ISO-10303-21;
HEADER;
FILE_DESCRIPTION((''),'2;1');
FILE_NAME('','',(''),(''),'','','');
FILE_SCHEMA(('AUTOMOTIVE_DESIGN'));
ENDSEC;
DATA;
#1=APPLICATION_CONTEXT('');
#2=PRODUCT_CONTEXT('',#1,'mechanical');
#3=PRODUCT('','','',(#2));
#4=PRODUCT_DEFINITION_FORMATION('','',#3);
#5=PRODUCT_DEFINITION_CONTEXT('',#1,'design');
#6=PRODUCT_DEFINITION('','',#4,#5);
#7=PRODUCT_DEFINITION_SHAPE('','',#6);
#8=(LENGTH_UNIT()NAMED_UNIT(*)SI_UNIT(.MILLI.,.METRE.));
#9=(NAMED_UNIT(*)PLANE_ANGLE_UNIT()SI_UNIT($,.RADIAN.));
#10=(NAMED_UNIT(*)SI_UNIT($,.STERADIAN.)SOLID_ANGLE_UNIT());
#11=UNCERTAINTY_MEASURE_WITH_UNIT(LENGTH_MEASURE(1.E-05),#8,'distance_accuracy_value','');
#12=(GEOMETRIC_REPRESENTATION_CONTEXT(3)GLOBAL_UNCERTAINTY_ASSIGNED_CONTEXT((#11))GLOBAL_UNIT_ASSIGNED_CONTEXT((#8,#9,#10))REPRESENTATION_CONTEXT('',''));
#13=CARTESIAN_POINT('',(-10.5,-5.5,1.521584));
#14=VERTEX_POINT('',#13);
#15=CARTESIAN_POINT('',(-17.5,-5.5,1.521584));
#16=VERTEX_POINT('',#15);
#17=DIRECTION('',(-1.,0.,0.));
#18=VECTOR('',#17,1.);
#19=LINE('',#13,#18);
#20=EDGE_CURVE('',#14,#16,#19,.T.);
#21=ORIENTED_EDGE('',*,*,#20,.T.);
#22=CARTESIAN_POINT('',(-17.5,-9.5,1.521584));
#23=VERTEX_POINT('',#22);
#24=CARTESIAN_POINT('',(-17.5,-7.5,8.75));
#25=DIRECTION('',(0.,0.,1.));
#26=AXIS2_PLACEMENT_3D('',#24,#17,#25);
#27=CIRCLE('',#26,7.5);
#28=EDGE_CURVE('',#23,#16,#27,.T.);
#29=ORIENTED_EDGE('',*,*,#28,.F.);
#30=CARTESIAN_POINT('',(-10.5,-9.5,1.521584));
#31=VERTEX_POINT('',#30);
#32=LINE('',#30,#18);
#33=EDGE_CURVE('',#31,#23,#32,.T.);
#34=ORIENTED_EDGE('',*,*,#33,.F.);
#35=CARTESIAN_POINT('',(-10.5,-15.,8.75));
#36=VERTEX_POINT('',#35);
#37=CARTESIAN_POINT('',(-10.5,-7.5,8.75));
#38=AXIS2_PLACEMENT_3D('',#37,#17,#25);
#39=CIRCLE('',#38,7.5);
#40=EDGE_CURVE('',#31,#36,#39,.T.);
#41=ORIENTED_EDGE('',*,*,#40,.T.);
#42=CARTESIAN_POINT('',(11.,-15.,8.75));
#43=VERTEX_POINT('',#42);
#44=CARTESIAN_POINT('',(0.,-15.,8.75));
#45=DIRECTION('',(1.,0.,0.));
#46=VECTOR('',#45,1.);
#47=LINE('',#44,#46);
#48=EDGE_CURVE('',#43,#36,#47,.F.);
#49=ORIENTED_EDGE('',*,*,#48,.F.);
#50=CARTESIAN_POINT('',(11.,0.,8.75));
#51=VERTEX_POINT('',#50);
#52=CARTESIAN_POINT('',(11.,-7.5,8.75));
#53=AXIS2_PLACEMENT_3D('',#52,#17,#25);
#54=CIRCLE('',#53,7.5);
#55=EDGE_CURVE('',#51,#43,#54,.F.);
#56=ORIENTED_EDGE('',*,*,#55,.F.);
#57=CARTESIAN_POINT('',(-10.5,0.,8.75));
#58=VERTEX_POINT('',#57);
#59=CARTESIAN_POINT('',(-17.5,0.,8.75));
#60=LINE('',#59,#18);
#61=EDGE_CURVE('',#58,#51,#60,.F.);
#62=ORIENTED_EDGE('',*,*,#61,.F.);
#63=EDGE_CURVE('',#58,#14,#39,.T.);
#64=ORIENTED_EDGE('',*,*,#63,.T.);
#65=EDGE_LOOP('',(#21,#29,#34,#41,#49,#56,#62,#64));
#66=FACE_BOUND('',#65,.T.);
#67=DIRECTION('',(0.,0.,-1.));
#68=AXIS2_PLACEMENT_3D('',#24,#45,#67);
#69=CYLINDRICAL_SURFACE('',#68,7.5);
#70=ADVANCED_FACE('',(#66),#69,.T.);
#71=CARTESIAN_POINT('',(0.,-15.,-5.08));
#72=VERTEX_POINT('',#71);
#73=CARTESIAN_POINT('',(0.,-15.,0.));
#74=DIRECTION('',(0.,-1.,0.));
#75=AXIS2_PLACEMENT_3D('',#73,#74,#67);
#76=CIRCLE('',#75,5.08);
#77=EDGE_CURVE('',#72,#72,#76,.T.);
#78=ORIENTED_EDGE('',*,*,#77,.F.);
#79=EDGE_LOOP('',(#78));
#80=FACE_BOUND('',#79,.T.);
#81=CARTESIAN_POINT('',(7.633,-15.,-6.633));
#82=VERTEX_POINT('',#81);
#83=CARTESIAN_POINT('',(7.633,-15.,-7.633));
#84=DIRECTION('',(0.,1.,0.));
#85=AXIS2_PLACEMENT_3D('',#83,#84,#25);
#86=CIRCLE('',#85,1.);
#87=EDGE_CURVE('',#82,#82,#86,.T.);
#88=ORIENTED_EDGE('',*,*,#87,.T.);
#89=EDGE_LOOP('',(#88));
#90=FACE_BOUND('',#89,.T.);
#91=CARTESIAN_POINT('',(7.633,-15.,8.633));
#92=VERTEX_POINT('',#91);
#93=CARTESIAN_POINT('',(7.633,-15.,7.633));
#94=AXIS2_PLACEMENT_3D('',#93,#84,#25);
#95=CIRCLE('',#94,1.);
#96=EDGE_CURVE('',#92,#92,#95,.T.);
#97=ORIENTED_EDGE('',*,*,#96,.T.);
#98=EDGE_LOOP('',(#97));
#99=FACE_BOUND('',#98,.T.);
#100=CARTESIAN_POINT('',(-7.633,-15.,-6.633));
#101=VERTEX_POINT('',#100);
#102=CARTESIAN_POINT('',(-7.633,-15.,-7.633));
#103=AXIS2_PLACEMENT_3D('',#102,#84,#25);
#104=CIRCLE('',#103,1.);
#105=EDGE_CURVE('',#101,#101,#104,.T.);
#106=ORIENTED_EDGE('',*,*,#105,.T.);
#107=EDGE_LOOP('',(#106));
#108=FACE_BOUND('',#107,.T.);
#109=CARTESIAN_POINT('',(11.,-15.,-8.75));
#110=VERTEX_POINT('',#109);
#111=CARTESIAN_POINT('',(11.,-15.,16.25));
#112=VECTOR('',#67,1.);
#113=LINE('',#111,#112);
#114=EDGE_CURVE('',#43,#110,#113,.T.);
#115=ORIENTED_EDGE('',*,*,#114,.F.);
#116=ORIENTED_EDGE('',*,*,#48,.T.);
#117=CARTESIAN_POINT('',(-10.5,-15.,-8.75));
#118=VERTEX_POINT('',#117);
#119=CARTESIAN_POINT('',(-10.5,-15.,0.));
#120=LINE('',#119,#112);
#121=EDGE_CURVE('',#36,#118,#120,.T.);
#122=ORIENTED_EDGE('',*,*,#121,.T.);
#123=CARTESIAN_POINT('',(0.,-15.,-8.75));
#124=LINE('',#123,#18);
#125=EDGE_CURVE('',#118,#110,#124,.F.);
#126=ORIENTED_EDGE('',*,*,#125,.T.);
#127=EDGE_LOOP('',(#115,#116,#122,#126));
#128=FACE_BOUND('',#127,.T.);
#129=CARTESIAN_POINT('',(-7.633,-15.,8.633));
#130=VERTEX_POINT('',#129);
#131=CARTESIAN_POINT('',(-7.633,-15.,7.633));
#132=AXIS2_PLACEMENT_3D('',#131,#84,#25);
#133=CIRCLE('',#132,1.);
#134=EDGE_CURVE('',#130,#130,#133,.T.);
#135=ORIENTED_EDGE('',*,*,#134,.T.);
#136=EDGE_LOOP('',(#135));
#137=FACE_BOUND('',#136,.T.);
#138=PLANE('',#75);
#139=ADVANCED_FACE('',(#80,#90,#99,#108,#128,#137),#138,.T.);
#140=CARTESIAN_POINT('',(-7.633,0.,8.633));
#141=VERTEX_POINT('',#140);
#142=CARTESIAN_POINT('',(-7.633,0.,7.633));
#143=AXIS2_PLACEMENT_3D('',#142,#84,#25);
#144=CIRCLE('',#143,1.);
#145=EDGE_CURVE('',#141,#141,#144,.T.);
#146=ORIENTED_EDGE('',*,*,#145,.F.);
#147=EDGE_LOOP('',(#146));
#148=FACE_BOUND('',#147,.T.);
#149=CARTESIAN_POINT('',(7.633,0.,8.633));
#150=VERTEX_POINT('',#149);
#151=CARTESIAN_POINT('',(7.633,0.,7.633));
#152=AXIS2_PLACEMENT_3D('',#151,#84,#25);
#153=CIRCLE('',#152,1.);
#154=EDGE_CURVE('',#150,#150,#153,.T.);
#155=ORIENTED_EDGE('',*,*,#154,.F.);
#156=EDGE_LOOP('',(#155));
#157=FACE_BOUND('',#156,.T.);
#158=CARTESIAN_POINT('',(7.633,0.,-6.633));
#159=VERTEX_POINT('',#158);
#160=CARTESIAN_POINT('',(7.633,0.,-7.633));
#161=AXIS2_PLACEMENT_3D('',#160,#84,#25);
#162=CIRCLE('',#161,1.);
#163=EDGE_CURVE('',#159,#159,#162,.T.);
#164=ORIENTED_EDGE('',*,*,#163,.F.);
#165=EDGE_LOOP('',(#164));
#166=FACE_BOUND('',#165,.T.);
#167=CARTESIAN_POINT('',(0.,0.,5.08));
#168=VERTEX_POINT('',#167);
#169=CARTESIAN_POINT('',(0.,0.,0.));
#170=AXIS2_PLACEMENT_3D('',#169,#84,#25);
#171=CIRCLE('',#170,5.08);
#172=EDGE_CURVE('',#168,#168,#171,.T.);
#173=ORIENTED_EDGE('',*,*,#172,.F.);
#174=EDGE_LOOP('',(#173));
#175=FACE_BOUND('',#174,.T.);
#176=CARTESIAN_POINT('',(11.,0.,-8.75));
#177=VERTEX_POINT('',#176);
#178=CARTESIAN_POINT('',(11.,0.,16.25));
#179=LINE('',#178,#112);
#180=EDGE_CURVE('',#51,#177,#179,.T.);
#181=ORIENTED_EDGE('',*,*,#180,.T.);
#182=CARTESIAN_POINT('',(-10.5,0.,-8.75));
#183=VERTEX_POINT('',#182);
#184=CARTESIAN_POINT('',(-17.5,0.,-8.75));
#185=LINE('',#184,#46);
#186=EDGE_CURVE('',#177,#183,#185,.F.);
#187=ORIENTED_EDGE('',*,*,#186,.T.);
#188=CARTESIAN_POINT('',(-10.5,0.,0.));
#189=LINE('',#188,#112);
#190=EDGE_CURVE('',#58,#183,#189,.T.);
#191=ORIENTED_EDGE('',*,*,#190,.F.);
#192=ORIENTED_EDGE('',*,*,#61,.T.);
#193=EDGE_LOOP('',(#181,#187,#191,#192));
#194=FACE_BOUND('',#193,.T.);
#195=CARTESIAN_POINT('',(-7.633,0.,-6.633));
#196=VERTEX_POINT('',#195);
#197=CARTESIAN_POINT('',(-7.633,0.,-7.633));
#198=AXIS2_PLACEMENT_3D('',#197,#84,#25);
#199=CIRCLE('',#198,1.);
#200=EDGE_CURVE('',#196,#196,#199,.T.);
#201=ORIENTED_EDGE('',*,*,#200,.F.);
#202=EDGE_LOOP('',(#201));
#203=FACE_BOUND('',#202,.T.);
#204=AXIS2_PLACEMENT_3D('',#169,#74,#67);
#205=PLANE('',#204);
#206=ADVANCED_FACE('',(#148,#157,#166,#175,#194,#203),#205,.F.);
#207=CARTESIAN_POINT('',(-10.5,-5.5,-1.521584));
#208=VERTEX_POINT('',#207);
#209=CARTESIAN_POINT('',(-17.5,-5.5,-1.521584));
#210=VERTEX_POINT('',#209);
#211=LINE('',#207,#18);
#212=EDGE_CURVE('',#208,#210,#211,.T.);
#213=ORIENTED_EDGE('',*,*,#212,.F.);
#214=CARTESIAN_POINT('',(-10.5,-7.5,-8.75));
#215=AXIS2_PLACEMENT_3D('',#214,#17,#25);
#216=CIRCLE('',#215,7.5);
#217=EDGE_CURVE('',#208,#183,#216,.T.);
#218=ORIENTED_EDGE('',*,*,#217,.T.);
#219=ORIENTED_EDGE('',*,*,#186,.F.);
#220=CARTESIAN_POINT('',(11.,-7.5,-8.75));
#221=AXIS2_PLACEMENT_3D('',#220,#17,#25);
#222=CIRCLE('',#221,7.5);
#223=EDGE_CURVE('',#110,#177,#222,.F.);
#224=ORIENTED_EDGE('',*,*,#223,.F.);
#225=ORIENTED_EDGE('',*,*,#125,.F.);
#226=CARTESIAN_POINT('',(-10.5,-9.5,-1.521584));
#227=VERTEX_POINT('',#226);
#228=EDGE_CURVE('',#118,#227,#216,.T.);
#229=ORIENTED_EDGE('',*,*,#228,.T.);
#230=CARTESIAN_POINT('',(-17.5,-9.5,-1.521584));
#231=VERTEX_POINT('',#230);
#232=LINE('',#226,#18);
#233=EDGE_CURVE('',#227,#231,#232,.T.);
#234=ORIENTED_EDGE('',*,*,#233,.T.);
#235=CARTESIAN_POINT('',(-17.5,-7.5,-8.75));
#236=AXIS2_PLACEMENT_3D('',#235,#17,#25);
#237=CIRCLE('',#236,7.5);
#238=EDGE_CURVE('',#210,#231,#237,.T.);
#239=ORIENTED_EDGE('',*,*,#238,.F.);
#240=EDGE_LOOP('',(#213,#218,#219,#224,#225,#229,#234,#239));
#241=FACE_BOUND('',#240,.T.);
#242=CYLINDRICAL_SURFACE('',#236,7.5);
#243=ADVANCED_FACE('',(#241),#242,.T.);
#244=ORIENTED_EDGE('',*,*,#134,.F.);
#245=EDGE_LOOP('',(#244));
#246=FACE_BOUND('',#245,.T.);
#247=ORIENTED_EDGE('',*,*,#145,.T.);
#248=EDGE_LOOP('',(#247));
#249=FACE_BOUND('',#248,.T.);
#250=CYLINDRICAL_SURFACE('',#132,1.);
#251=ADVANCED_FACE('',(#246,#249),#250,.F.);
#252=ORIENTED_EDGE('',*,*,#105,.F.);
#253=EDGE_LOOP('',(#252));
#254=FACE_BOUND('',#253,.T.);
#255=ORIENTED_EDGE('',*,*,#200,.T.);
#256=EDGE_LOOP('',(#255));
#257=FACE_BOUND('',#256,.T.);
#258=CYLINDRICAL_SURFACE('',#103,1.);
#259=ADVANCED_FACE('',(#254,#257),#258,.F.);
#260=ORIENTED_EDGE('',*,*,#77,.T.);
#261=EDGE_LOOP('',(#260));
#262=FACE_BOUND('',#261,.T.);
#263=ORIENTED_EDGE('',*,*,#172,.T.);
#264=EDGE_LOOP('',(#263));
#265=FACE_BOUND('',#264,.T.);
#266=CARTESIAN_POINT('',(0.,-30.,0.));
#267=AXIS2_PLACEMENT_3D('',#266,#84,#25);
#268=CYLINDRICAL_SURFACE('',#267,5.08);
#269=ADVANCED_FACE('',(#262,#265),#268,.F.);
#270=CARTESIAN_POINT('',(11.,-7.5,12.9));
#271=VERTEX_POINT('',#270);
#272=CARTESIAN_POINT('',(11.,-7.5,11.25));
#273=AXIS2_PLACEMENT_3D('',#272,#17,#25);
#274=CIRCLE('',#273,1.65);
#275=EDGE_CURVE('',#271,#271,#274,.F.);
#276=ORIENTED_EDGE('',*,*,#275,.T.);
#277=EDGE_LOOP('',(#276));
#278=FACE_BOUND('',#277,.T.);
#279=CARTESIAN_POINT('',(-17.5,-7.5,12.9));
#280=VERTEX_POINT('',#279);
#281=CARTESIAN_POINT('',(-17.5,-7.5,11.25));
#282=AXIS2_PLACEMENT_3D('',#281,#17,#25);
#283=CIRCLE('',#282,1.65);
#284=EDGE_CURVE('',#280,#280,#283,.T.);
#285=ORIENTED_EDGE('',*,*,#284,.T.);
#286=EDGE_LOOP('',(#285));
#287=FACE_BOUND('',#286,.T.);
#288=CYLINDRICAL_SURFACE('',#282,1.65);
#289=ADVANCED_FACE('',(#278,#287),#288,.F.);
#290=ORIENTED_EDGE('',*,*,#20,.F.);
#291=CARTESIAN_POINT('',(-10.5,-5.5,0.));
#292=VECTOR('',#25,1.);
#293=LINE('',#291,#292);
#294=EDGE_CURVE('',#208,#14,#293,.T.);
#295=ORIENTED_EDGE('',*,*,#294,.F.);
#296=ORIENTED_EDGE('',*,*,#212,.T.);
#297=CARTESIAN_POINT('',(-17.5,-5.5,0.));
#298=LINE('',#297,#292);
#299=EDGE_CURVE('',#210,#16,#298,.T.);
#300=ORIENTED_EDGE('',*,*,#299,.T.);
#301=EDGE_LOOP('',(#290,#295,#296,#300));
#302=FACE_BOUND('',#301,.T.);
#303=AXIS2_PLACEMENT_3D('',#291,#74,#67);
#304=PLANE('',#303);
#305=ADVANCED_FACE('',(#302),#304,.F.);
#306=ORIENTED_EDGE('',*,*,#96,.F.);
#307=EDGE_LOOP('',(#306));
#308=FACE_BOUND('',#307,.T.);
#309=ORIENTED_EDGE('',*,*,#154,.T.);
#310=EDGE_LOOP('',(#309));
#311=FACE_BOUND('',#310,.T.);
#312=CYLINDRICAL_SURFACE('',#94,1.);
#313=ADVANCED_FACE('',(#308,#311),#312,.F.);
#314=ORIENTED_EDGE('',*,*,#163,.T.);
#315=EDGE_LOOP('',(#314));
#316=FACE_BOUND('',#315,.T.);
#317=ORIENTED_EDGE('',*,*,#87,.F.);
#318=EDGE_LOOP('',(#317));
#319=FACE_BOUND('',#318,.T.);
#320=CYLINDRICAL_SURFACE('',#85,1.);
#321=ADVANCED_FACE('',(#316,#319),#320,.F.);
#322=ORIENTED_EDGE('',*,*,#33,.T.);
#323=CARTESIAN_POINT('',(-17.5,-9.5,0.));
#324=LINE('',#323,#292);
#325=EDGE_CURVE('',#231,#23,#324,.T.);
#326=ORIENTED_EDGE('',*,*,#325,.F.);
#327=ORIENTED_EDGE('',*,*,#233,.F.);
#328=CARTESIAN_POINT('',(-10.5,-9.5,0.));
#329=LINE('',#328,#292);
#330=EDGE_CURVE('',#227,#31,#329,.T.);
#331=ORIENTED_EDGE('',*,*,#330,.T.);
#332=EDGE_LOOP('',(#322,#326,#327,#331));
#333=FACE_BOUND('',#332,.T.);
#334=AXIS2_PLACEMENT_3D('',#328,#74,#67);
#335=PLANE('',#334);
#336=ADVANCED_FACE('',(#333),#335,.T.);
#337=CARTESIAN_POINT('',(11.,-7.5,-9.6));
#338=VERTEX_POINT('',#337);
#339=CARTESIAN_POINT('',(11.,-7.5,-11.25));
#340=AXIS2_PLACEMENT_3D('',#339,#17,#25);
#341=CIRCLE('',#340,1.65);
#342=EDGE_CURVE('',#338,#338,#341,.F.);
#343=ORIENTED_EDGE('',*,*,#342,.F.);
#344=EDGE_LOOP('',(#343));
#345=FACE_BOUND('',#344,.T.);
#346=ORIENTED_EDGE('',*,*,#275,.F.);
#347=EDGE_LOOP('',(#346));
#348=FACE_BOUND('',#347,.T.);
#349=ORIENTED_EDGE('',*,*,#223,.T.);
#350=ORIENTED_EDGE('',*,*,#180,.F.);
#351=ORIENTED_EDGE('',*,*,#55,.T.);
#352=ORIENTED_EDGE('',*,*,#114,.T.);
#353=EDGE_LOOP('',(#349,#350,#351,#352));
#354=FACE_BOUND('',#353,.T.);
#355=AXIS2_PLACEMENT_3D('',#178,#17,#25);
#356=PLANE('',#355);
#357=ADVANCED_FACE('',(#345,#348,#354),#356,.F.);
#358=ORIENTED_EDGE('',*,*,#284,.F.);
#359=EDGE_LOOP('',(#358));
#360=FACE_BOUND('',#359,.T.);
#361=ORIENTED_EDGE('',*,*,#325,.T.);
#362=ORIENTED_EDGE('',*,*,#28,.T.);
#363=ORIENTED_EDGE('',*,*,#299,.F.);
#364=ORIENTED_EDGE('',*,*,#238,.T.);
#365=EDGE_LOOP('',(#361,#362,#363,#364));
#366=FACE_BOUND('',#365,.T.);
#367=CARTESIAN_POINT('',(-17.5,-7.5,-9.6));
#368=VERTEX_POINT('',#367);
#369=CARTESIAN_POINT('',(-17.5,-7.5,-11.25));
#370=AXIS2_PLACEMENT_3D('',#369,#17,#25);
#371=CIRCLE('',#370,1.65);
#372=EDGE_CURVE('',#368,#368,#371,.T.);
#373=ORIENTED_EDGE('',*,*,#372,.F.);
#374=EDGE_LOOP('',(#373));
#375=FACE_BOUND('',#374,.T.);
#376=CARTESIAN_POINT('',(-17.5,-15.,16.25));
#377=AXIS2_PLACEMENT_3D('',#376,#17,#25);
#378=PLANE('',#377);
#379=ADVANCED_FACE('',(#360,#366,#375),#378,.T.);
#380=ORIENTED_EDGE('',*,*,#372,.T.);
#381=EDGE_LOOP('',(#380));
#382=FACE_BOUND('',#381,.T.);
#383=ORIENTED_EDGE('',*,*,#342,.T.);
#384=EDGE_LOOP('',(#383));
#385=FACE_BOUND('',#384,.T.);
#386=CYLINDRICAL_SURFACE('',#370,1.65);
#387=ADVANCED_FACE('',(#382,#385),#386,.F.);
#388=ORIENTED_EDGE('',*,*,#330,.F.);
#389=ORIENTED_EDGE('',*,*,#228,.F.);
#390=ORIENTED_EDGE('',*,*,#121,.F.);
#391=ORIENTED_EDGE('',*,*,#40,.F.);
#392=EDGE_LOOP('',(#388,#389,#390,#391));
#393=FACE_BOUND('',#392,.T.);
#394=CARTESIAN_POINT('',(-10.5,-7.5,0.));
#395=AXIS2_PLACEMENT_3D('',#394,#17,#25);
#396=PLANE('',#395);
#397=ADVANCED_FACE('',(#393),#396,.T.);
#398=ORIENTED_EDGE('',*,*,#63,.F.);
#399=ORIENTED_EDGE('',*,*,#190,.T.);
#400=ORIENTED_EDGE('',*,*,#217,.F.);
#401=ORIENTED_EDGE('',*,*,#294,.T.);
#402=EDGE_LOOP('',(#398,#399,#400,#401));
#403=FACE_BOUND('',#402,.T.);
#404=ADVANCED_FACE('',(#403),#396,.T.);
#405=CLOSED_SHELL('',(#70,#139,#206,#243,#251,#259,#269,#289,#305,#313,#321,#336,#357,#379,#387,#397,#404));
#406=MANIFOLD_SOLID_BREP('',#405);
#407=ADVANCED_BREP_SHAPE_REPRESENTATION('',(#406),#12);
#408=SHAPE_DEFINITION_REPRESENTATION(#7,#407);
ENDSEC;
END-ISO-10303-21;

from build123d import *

# Parameters (mm, degrees)
SKETCH1_W             = 35
SKETCH1_H             = 32.5
BOSS_EXTRUDE1_DEPTH   = 15
SKETCH2_R             = 5.08
CUT_EXTRUDE2_DEPTH    = 30
SKETCH4_R             = 1
CUT_EXTRUDE3_DEPTH    = 15
M4X0_7_TAPPED_HOLE1_D = 3.3
FILLET1_RADIUS        = 7.5
FILLET1_LENGTH        = 35
FILLET2_RADIUS        = 7.5
FILLET2_LENGTH        = 35
SKETCH19_W            = 6.5
SKETCH19_H            = 32.5
CUT_EXTRUDE13_DEPTH   = 29.201285432
CUT_EXTRUDE14_START   = -7
CUT_EXTRUDE14_DEPTH   = 7


# Read off the part's stored shape, not the designer's step: Cut-Extrude14
with BuildPart() as part:
    # Sketch1 → Boss-Extrude1 (new body)
    with BuildSketch(Plane(origin=(0, 0, 0), x_dir=(1, 0, 0), z_dir=(0, 1, 0))):
        Rectangle(SKETCH1_W, SKETCH1_H)
    extrude(amount=-BOSS_EXTRUDE1_DEPTH)

    # Sketch2 → Cut-Extrude2 (cut)
    with BuildSketch(Plane(origin=(0, 0, 0), x_dir=(1, 0, 0), z_dir=(0, 1, 0))):
        with Locations(Location((0, 0, 0), (0, 0, 270))):
            Circle(SKETCH2_R)
    extrude(amount=-CUT_EXTRUDE2_DEPTH, mode=Mode.SUBTRACT)

    # Sketch4 → Cut-Extrude3 (cut)
    with BuildSketch(Plane(origin=(0, 0, 0), x_dir=(1, 0, 0), z_dir=(0, 1, 0))):
        with Locations(Location((7.633, 7.633, 0), (0, 0, 270))):
            Circle(SKETCH4_R)
        with Locations(Location((-7.633, 7.633, 0), (0, 0, 270))):
            Circle(SKETCH4_R)
        with Locations(Location((-7.633, -7.633, 0), (0, 0, 270))):
            Circle(SKETCH4_R)
        with Locations(Location((7.633, -7.633, 0), (0, 0, 270))):
            Circle(SKETCH4_R)
    extrude(amount=-CUT_EXTRUDE3_DEPTH, mode=Mode.SUBTRACT)

    # M4x0.7 Tapped Hole1 (through all)
    with Locations(Plane(origin=(-17.5, 0, 0), x_dir=(0, -1, 0), z_dir=(-1, 0, 0))):
        with Locations((7.5, -11.25), (7.5, 11.25)):
            Hole(M4X0_7_TAPPED_HOLE1_D / 2)

    # Fillet1: full round fillet: the end face becomes a half cylinder, R = half its width
    fillet1_face = Plane((0, -7.5, -16.25), x_dir=(1, 0, 0), z_dir=(0, 0, -1))  # on the end face: x along it, z out of the body
    fillet1_slab = fillet1_face.offset(-FILLET1_RADIUS / 2) * Box(FILLET1_LENGTH, 2 * FILLET1_RADIUS, FILLET1_RADIUS, mode=Mode.PRIVATE)  # the body's end, R deep
    fillet1_round = Plane((0, -7.5, -8.75), x_dir=(0, 0, -1), z_dir=(1, 0, 0)) * Cylinder(FILLET1_RADIUS, FILLET1_LENGTH, mode=Mode.PRIVATE)  # its axis R under the face
    add(fillet1_slab - fillet1_round, mode=Mode.SUBTRACT)

    # Fillet2: full round fillet: the end face becomes a half cylinder, R = half its width
    fillet2_face = Plane((0, -7.5, 16.25), x_dir=(1, 0, 0), z_dir=(0, 0, 1))  # on the end face: x along it, z out of the body
    fillet2_slab = fillet2_face.offset(-FILLET2_RADIUS / 2) * Box(FILLET2_LENGTH, 2 * FILLET2_RADIUS, FILLET2_RADIUS, mode=Mode.PRIVATE)  # the body's end, R deep
    fillet2_round = Plane((0, -7.5, 8.75), x_dir=(0, 0, 1), z_dir=(1, 0, 0)) * Cylinder(FILLET2_RADIUS, FILLET2_LENGTH, mode=Mode.PRIVATE)  # its axis R under the face
    add(fillet2_slab - fillet2_round, mode=Mode.SUBTRACT)

    # Sketch19 → Cut-Extrude13 (cut, through all)
    with BuildSketch(Plane.XZ.offset(15)):
        with Locations((14.25, 0)):
            Rectangle(SKETCH19_W, SKETCH19_H)
    extrude(amount=-CUT_EXTRUDE13_DEPTH, mode=Mode.SUBTRACT)

    # Cut-Extrude14 outline → Cut-Extrude14 (cut)
    with BuildSketch(Plane.ZY.offset(17.5).offset(CUT_EXTRUDE14_START)):
        with BuildLine():
            Line((-1.521583853, -5.5), (1.521583853, -5.5))
            ThreePointArc((1.521583853, -5.5), (4.208524469, -1.531331807), (8.75, 0))
            Line((8.75, 0), (-8.75, 0))
            ThreePointArc((-8.75, 0), (-4.208524469, -1.531331807), (-1.521583853, -5.5))
        make_face()
        with BuildLine():
            Line((-8.75, -15), (8.75, -15))
            ThreePointArc((8.75, -15), (4.208524469, -13.468668193), (1.521583853, -9.5))
            Line((1.521583853, -9.5), (-1.521583853, -9.5))
            ThreePointArc((-1.521583853, -9.5), (-4.208524469, -13.468668193), (-8.75, -15))
        make_face()
    extrude(amount=CUT_EXTRUDE14_DEPTH, mode=Mode.SUBTRACT)


solid = part.part
